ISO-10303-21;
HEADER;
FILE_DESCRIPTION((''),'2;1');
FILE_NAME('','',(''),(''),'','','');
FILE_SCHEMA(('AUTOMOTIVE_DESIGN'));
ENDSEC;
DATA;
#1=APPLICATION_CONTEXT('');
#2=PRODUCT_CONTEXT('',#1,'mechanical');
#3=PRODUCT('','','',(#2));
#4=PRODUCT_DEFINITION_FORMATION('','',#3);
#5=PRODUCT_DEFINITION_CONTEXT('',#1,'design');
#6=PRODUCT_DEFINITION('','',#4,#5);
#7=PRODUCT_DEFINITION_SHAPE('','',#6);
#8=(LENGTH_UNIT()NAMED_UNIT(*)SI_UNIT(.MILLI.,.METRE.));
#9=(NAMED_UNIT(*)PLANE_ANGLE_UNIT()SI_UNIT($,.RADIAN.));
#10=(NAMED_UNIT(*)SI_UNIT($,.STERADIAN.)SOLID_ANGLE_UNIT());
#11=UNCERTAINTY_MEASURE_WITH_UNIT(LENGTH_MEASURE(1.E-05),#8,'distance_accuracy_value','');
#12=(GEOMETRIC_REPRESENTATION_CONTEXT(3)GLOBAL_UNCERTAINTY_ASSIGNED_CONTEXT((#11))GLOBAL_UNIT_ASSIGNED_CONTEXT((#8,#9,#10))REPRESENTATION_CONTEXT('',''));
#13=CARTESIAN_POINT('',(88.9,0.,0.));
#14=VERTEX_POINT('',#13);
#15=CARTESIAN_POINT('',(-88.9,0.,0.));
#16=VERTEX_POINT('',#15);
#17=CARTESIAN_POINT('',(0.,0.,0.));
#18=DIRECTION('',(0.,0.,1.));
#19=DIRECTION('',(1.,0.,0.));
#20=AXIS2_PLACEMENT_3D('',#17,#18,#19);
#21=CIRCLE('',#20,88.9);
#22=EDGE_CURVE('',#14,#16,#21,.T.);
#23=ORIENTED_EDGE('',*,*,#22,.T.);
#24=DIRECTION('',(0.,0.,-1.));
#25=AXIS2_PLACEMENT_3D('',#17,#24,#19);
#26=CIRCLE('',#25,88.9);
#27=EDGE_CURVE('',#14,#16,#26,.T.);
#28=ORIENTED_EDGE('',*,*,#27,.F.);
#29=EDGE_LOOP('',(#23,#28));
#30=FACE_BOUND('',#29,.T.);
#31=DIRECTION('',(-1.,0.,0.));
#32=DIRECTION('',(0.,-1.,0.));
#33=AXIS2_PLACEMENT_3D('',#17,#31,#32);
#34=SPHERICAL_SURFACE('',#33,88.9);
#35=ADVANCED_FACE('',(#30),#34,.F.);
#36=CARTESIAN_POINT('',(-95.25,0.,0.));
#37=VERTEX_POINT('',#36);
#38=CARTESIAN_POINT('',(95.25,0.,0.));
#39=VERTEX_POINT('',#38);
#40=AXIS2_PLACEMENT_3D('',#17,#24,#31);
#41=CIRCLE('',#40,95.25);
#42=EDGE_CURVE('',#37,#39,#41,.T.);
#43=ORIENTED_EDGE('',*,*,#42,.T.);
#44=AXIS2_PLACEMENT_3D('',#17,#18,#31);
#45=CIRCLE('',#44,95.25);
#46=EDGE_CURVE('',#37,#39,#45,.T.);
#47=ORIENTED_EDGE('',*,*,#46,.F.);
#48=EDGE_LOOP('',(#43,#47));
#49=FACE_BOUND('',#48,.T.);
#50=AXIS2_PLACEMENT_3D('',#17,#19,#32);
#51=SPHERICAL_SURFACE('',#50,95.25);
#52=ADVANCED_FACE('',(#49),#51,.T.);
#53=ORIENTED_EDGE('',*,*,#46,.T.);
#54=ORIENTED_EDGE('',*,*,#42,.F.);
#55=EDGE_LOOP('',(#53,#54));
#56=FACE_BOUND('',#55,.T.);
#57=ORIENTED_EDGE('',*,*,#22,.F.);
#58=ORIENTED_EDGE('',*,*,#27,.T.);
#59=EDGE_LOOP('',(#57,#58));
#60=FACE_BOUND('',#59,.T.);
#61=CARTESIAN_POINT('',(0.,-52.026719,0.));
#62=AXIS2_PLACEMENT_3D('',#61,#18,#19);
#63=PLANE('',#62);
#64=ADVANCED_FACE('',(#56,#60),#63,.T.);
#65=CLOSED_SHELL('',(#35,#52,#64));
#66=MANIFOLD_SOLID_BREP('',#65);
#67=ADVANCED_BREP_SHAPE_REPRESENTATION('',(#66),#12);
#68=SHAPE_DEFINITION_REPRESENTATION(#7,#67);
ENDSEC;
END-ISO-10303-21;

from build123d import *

# Parameters (mm, degrees)
F1_ANGLE = 180


with BuildPart() as f1:
    # F0 (on Top) → F1 (revolve)
    with BuildSketch(Plane.XY):
        with BuildLine():
            ThreePointArc((-95.25, 0), (0, -95.25), (95.25, 0))
            Line((95.25, 0), (88.9, 0))
            ThreePointArc((88.9, 0), (0, -88.9), (-88.9, 0))
            Line((-88.9, 0), (-95.25, 0))
        make_face()
    revolve(axis=Axis((0, 0, 0), (1, 0, 0)), revolution_arc=F1_ANGLE)


solid = f1.part
